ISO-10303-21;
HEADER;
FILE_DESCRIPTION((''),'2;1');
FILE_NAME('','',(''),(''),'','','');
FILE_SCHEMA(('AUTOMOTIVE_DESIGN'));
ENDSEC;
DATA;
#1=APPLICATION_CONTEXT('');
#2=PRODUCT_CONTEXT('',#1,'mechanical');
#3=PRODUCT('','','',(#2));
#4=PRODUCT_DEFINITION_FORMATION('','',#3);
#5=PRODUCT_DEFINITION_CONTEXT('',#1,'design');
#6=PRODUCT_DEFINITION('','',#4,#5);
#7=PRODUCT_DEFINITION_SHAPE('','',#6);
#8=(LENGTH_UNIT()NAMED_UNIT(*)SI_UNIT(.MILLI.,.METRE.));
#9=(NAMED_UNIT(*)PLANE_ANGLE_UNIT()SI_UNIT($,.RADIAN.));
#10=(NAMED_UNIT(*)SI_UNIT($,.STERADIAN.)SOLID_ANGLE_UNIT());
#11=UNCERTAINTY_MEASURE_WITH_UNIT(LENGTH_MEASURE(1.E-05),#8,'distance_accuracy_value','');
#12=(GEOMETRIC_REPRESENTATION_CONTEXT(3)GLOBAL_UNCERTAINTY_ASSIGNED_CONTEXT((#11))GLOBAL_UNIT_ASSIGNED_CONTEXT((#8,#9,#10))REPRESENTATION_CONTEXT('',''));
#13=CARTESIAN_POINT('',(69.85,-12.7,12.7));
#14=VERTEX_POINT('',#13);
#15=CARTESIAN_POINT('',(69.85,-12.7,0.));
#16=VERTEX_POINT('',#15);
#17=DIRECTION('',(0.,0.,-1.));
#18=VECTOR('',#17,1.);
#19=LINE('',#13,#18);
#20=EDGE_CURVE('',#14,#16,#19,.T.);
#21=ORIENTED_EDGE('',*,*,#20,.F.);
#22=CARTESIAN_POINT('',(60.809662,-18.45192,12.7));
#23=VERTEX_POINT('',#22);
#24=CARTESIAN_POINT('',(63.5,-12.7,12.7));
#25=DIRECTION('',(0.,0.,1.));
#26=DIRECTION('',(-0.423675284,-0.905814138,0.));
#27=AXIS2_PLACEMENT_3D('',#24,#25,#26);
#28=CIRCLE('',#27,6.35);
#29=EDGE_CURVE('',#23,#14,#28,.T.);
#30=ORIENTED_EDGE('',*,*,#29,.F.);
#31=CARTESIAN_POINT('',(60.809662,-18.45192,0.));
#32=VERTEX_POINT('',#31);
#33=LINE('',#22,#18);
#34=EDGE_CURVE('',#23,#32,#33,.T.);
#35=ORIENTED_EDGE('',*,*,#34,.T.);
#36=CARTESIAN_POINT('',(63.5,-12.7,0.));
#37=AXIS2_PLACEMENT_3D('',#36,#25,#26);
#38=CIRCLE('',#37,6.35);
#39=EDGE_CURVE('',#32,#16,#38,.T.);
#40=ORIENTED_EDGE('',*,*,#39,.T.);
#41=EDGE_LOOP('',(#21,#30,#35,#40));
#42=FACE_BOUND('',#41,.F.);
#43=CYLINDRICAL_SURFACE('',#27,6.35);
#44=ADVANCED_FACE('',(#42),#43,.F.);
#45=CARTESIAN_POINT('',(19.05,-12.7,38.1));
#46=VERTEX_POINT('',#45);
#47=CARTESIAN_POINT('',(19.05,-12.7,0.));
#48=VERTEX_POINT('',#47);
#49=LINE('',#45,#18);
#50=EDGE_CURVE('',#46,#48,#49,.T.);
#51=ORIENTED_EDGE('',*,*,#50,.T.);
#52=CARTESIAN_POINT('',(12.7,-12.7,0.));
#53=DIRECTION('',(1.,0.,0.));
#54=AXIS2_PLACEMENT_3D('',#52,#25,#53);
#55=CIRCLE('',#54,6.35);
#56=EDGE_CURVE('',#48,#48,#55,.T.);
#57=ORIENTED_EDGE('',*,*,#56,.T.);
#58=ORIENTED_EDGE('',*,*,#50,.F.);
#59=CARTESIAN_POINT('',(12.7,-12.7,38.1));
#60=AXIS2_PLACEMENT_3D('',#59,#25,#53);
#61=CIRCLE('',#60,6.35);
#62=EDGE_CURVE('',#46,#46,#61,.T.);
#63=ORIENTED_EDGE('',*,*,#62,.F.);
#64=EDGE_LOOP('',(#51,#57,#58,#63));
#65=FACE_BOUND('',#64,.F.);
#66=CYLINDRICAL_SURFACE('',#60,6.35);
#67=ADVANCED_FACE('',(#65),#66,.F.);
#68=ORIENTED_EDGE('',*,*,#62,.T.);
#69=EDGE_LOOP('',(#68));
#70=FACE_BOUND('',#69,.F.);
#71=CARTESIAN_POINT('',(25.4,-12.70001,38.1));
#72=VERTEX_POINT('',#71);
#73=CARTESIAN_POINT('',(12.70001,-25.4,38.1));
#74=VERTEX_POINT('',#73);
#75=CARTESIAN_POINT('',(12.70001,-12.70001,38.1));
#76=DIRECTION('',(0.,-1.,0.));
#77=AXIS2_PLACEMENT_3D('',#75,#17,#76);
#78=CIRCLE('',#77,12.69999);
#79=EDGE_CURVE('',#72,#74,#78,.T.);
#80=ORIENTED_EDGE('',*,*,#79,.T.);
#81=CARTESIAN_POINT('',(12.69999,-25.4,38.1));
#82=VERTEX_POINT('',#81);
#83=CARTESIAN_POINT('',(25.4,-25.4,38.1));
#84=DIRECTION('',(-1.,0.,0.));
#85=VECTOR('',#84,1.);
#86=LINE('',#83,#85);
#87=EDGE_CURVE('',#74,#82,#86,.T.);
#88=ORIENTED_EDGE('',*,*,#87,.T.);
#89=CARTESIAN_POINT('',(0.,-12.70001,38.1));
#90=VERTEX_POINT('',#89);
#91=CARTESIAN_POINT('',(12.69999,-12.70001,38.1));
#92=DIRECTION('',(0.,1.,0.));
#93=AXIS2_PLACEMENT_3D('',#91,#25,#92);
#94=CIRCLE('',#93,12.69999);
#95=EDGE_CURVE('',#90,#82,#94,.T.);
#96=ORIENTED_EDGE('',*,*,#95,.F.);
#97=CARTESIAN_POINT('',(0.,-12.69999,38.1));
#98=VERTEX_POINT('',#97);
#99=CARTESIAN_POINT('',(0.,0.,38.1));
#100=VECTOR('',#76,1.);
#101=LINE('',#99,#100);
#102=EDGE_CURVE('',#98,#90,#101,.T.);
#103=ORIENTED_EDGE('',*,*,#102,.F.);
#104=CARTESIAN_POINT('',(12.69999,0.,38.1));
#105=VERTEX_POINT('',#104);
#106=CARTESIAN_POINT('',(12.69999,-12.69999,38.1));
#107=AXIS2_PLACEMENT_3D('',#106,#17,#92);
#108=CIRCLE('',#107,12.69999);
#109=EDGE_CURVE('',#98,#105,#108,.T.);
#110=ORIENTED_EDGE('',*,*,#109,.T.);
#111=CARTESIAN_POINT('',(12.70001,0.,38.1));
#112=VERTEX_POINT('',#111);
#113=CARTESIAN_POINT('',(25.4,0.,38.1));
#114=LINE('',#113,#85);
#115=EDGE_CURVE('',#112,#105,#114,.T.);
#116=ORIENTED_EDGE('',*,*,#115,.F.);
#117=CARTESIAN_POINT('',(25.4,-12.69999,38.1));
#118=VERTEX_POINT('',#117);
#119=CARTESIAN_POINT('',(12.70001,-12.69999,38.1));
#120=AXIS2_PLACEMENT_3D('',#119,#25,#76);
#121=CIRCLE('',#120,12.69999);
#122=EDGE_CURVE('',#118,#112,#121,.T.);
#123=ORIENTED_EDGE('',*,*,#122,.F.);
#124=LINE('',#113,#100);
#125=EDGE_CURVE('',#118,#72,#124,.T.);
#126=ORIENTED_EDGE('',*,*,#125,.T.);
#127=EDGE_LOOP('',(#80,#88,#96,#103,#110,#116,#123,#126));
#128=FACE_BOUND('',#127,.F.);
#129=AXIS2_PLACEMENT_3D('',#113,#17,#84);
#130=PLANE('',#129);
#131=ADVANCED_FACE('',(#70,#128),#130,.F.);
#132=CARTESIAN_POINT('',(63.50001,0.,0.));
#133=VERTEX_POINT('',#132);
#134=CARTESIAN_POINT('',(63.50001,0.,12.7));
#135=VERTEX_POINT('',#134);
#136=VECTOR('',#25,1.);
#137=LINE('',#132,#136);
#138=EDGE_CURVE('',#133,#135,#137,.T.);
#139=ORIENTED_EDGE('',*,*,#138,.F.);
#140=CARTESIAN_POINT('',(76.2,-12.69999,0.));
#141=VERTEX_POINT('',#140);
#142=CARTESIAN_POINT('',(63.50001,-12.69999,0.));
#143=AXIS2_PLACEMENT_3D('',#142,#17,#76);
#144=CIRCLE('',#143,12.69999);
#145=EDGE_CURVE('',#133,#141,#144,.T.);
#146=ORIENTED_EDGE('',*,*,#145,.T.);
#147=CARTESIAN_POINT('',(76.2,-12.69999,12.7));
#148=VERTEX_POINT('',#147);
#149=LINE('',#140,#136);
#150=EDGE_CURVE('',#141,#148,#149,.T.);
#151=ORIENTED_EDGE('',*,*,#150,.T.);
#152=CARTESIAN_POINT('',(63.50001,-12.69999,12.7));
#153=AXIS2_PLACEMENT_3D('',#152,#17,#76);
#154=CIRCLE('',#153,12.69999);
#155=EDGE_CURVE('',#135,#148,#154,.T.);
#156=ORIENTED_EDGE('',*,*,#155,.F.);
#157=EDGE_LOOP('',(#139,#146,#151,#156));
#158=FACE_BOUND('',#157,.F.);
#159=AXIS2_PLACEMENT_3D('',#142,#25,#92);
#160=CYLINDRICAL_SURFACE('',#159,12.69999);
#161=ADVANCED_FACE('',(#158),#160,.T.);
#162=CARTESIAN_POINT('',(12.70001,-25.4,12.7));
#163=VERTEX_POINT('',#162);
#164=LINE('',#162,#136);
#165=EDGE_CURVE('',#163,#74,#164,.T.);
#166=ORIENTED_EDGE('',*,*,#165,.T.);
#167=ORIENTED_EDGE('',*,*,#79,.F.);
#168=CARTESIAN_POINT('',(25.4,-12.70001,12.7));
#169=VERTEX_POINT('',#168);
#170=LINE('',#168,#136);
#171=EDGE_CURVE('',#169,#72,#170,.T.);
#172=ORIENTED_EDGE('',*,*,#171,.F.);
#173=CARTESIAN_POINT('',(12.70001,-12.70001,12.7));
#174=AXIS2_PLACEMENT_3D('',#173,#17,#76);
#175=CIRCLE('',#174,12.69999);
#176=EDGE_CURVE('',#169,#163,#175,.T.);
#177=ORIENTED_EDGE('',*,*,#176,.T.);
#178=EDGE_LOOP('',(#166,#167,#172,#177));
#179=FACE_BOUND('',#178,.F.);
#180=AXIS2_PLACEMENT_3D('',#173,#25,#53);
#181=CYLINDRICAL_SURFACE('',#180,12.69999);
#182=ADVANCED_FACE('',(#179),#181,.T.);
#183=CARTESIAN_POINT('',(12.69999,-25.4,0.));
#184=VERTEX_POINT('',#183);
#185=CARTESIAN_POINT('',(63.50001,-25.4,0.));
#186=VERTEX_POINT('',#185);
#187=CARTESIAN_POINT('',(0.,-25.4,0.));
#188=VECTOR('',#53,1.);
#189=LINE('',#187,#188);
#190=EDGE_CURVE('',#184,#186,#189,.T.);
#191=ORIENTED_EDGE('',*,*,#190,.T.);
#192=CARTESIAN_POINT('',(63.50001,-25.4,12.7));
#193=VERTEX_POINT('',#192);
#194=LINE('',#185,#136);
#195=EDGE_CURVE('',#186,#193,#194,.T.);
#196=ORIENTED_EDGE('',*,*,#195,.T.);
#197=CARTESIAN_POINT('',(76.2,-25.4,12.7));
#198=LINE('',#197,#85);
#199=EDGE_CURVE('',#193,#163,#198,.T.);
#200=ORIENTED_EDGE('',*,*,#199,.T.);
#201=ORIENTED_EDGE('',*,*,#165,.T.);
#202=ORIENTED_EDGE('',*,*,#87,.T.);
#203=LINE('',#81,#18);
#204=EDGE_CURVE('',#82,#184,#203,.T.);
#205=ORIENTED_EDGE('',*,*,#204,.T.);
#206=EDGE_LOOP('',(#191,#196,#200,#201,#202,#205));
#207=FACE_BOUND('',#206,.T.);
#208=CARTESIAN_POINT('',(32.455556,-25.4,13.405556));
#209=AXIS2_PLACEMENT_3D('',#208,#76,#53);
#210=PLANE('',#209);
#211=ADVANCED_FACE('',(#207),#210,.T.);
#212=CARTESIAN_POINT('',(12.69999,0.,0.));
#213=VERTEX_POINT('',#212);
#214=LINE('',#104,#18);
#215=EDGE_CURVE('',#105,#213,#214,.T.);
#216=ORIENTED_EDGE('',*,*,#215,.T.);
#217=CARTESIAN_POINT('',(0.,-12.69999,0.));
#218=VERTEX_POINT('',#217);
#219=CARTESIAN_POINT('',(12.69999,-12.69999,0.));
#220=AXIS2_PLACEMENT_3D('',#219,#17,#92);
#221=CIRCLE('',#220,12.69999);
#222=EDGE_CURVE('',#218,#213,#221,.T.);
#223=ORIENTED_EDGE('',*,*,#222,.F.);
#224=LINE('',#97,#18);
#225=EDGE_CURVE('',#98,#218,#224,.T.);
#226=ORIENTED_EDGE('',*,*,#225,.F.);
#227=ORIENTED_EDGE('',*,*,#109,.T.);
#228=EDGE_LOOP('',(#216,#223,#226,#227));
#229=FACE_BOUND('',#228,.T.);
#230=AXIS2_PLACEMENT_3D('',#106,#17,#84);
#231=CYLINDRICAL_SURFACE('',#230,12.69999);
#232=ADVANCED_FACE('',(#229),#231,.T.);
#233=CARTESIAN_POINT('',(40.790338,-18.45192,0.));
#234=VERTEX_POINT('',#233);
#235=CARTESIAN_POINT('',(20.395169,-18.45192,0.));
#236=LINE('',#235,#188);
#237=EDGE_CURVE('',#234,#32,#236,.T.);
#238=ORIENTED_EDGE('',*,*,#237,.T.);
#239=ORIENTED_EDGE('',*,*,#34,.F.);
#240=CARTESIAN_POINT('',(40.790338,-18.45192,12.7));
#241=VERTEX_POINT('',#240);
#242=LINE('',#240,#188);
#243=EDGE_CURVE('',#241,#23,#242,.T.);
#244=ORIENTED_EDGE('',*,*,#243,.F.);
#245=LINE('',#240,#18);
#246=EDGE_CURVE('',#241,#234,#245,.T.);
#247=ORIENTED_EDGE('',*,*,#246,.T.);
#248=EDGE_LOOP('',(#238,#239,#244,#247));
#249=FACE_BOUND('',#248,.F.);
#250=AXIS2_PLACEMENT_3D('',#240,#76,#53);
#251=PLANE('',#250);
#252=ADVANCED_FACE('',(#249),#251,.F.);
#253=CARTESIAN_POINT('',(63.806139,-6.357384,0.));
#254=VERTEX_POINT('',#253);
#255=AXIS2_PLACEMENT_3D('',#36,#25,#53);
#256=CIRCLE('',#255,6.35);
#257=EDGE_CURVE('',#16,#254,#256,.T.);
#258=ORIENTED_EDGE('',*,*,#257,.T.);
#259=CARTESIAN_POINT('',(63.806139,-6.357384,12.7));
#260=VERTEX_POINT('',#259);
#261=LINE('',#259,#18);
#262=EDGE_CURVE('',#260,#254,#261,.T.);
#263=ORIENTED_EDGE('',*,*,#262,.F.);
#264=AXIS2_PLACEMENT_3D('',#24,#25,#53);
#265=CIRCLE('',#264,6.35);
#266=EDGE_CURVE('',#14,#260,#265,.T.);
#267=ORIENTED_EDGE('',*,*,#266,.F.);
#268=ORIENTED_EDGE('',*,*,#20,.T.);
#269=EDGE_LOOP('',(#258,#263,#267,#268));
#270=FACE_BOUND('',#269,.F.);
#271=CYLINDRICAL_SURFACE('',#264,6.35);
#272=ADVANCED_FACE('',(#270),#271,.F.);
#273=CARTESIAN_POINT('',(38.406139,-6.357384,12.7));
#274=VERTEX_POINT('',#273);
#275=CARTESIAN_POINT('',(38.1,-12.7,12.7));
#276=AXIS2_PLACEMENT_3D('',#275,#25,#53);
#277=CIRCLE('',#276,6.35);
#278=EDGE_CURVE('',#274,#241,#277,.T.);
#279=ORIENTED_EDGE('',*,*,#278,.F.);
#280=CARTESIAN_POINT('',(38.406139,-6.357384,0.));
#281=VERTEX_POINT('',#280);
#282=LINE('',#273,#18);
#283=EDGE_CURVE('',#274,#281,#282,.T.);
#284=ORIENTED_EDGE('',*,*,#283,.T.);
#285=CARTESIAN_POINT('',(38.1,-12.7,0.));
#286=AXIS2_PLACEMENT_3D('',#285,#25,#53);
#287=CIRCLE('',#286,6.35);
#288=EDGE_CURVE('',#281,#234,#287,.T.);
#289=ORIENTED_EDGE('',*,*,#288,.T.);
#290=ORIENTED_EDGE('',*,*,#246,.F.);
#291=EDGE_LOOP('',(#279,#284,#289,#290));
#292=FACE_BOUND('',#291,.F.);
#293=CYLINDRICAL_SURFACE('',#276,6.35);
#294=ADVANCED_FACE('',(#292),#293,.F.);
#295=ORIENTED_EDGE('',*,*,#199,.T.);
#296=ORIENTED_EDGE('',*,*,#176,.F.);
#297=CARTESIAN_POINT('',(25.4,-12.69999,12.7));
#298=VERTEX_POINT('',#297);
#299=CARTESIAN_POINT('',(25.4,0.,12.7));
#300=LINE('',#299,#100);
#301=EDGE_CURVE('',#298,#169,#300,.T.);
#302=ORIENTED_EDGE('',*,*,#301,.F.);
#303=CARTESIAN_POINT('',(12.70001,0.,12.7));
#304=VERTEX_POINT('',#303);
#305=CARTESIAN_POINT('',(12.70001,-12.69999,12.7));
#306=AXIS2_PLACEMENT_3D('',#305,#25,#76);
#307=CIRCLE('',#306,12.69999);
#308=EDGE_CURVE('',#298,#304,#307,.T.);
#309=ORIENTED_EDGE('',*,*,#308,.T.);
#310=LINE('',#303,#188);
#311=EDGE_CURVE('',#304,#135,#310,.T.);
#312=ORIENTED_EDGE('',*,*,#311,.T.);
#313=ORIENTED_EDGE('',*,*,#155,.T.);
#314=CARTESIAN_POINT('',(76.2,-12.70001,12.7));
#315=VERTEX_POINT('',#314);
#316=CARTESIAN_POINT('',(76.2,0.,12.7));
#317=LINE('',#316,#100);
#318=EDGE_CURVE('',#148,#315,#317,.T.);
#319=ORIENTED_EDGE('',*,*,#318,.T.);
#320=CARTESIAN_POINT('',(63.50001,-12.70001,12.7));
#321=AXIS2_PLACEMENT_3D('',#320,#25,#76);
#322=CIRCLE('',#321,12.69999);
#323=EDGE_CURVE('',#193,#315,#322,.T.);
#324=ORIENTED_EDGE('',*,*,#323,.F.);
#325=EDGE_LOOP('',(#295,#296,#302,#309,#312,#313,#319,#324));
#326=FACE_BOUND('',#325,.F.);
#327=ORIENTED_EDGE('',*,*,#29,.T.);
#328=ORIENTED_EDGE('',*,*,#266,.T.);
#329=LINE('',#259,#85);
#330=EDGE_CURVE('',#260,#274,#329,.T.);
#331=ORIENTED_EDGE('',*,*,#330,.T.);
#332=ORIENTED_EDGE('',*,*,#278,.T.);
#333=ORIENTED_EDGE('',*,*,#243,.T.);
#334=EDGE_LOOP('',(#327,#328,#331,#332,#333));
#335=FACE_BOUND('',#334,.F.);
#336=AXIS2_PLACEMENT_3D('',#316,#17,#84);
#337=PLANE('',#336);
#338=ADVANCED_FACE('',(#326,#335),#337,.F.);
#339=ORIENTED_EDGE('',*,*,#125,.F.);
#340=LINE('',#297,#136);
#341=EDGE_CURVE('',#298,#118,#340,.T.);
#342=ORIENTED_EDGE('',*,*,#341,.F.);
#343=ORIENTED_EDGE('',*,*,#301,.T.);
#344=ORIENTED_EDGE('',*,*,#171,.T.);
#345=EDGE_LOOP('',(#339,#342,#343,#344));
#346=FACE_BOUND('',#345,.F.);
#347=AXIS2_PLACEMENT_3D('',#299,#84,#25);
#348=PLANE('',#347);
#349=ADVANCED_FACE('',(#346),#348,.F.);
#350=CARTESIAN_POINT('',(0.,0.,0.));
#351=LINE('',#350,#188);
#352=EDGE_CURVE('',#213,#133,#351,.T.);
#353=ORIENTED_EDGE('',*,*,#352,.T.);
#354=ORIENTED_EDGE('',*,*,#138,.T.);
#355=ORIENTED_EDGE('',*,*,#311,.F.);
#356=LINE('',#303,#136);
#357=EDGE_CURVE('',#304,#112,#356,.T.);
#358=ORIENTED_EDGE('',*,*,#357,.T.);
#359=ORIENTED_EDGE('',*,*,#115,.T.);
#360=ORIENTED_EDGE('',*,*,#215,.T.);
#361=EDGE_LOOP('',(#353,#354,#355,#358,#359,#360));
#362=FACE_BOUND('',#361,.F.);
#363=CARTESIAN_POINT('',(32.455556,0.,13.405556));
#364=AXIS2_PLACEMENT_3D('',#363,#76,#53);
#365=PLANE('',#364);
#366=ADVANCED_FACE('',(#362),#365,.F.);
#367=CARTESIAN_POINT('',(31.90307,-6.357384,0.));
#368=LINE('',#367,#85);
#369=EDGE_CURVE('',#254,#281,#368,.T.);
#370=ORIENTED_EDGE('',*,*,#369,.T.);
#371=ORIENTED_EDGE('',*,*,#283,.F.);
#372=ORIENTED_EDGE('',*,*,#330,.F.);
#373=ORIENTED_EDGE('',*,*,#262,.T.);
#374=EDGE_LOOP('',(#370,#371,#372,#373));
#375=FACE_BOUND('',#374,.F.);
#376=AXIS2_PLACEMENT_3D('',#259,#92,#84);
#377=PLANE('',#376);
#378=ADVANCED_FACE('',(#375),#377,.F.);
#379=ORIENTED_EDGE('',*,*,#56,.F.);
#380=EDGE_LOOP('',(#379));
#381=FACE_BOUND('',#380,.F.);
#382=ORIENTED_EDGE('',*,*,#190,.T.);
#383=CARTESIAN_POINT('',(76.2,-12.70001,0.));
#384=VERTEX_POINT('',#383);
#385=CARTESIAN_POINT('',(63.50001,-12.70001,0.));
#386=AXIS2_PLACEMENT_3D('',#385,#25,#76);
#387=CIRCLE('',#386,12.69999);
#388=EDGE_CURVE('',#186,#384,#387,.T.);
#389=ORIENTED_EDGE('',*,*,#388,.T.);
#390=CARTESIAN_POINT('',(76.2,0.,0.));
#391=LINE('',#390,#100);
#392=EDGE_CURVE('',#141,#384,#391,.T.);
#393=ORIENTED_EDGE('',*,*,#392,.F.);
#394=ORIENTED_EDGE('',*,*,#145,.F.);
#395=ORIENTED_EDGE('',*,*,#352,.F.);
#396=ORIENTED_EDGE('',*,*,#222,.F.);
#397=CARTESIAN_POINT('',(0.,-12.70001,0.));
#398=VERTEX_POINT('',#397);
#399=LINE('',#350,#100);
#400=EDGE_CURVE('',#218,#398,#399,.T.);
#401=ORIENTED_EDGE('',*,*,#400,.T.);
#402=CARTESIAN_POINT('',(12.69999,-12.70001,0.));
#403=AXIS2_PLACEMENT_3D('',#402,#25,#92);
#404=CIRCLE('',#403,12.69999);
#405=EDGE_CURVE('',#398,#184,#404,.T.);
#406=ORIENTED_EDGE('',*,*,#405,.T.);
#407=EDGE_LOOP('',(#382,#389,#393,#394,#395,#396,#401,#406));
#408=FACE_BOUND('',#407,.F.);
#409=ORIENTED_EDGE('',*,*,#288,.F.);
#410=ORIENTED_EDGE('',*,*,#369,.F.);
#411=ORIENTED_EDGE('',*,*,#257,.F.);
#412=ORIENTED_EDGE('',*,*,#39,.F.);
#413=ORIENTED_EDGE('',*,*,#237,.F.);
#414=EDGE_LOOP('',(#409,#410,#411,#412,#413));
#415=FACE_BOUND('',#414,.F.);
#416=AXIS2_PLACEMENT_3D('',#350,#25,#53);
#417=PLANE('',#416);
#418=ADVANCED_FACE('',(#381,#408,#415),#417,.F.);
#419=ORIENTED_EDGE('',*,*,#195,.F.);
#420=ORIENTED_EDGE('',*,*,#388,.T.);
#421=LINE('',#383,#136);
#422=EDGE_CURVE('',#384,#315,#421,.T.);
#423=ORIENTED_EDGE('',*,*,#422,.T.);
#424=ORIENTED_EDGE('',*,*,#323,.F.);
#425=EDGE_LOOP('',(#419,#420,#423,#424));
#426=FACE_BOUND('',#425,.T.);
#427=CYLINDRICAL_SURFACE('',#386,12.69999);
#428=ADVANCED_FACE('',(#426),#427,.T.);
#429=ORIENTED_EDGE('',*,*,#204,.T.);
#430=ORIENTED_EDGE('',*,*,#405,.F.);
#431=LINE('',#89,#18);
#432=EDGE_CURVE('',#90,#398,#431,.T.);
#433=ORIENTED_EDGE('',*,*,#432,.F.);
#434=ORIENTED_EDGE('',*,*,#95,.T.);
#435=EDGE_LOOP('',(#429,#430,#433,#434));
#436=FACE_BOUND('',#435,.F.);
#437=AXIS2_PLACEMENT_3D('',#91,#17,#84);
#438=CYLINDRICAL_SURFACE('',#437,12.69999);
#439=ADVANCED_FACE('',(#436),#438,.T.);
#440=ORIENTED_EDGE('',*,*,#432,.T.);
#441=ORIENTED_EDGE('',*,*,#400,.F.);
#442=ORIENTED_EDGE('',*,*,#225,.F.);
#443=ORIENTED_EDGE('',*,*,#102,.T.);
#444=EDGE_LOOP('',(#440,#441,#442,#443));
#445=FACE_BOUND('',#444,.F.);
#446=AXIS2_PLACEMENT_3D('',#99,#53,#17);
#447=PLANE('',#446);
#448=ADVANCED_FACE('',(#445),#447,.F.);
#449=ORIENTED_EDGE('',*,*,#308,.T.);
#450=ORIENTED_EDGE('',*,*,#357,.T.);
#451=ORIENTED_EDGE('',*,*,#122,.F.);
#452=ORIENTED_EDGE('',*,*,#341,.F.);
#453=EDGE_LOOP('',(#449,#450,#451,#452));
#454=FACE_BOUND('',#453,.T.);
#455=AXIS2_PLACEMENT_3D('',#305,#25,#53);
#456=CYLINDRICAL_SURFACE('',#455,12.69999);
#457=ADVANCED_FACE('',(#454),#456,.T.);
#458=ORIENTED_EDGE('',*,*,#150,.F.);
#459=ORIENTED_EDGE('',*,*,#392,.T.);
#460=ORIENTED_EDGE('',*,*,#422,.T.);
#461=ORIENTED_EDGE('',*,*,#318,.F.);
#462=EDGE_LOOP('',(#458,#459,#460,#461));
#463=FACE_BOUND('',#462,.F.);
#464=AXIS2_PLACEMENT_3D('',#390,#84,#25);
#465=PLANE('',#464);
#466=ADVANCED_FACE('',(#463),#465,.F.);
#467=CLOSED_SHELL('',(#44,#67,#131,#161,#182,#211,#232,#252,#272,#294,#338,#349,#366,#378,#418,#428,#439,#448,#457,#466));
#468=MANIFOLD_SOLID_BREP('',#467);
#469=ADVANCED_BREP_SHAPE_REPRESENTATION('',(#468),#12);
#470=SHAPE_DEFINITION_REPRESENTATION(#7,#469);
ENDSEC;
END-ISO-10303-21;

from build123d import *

# Parameters (mm, degrees)
F1_DEPTH = 25.4
F2_R     = 12.69999
F3_R     = 6.35
F4_DEPTH = 50.8
F5_R     = 12.69999
F6_R     = 6.35
F8_DEPTH = 25.4


# Not quite as in the source:
# - a fillet or chamfer is up to 0.001 mm smaller than in the source, because OpenCascade refuses the exact size


with BuildPart() as f1:
    # F0 (on Front) → F1 (new body)
    with BuildSketch(Plane.XZ):
        Polygon((0, 38.1), (0, 0), (76.2, 0), (76.2, 12.7), (25.4, 12.7), (25.4, 38.1), align=None)
    extrude(amount=F1_DEPTH)

    # F2 (radius 12.7 in the source; OpenCascade refuses exactly that, so slightly less here)
    f2_edges = [f1.edges().sort_by_distance(p)[0] for p in [
        (25.4, 0, 25.4),
        (25.4, -25.4, 25.4),
        (0, -25.4, 19.05),
        (0, 0, 19.05),
    ]]
    fillet(f2_edges, radius=F2_R)

    # F3 (on face) → F4 (cut)
    with BuildSketch(Plane.XY.offset(38.1)):
        with Locations((12.7, -12.7)):
            Circle(F3_R)
    extrude(amount=-F4_DEPTH, mode=Mode.SUBTRACT)

    # F5 (radius 12.7 in the source; OpenCascade refuses exactly that, so slightly less here)
    f5_edges = [f1.edges().sort_by_distance(p)[0] for p in [
        (76.2, 0, 6.35),
        (76.2, -25.4, 6.35),
    ]]
    fillet(f5_edges, radius=F5_R)

    # F6 (on face) + F7 (on face) → F8 (cut)
    with BuildSketch(Plane.XY.offset(12.7)):
        with Locations((38.1, -12.7)):
            Circle(F6_R)
    with BuildSketch(Plane.XY.offset(12.7)):
        with BuildLine():
            Line((40.7903380557, -18.4519197792), (60.8096619443, -18.4519197792))
            ThreePointArc((60.8096619443, -18.4519197792), (57.2698982045, -11.4718584702), (63.1938608334, -6.3573839143))
            Line((63.1938608334, -6.3573839143), (38.4061391666, -6.3573839143))
            ThreePointArc((38.4061391666, -6.3573839143), (42.6970905858, -8.3194454522), (44.45, -12.7))
            ThreePointArc((44.45, -12.7), (43.4575249254, -16.108728014), (40.7903380557, -18.4519197792))
        make_face()
        with BuildLine():
            ThreePointArc((63.1938608334, -6.3573839143), (57.2698982045, -11.4718584702), (60.8096619443, -18.4519197792))
            ThreePointArc((60.8096619443, -18.4519197792), (66.908728014, -18.0575249254), (69.85, -12.7))
            ThreePointArc((69.85, -12.7), (68.0970905858, -8.3194454522), (63.8061391666, -6.3573839143))
            Line((63.8061391666, -6.3573839143), (63.1938608334, -6.3573839143))
        make_face()
    extrude(amount=-F8_DEPTH, mode=Mode.SUBTRACT)


solid = f1.part
